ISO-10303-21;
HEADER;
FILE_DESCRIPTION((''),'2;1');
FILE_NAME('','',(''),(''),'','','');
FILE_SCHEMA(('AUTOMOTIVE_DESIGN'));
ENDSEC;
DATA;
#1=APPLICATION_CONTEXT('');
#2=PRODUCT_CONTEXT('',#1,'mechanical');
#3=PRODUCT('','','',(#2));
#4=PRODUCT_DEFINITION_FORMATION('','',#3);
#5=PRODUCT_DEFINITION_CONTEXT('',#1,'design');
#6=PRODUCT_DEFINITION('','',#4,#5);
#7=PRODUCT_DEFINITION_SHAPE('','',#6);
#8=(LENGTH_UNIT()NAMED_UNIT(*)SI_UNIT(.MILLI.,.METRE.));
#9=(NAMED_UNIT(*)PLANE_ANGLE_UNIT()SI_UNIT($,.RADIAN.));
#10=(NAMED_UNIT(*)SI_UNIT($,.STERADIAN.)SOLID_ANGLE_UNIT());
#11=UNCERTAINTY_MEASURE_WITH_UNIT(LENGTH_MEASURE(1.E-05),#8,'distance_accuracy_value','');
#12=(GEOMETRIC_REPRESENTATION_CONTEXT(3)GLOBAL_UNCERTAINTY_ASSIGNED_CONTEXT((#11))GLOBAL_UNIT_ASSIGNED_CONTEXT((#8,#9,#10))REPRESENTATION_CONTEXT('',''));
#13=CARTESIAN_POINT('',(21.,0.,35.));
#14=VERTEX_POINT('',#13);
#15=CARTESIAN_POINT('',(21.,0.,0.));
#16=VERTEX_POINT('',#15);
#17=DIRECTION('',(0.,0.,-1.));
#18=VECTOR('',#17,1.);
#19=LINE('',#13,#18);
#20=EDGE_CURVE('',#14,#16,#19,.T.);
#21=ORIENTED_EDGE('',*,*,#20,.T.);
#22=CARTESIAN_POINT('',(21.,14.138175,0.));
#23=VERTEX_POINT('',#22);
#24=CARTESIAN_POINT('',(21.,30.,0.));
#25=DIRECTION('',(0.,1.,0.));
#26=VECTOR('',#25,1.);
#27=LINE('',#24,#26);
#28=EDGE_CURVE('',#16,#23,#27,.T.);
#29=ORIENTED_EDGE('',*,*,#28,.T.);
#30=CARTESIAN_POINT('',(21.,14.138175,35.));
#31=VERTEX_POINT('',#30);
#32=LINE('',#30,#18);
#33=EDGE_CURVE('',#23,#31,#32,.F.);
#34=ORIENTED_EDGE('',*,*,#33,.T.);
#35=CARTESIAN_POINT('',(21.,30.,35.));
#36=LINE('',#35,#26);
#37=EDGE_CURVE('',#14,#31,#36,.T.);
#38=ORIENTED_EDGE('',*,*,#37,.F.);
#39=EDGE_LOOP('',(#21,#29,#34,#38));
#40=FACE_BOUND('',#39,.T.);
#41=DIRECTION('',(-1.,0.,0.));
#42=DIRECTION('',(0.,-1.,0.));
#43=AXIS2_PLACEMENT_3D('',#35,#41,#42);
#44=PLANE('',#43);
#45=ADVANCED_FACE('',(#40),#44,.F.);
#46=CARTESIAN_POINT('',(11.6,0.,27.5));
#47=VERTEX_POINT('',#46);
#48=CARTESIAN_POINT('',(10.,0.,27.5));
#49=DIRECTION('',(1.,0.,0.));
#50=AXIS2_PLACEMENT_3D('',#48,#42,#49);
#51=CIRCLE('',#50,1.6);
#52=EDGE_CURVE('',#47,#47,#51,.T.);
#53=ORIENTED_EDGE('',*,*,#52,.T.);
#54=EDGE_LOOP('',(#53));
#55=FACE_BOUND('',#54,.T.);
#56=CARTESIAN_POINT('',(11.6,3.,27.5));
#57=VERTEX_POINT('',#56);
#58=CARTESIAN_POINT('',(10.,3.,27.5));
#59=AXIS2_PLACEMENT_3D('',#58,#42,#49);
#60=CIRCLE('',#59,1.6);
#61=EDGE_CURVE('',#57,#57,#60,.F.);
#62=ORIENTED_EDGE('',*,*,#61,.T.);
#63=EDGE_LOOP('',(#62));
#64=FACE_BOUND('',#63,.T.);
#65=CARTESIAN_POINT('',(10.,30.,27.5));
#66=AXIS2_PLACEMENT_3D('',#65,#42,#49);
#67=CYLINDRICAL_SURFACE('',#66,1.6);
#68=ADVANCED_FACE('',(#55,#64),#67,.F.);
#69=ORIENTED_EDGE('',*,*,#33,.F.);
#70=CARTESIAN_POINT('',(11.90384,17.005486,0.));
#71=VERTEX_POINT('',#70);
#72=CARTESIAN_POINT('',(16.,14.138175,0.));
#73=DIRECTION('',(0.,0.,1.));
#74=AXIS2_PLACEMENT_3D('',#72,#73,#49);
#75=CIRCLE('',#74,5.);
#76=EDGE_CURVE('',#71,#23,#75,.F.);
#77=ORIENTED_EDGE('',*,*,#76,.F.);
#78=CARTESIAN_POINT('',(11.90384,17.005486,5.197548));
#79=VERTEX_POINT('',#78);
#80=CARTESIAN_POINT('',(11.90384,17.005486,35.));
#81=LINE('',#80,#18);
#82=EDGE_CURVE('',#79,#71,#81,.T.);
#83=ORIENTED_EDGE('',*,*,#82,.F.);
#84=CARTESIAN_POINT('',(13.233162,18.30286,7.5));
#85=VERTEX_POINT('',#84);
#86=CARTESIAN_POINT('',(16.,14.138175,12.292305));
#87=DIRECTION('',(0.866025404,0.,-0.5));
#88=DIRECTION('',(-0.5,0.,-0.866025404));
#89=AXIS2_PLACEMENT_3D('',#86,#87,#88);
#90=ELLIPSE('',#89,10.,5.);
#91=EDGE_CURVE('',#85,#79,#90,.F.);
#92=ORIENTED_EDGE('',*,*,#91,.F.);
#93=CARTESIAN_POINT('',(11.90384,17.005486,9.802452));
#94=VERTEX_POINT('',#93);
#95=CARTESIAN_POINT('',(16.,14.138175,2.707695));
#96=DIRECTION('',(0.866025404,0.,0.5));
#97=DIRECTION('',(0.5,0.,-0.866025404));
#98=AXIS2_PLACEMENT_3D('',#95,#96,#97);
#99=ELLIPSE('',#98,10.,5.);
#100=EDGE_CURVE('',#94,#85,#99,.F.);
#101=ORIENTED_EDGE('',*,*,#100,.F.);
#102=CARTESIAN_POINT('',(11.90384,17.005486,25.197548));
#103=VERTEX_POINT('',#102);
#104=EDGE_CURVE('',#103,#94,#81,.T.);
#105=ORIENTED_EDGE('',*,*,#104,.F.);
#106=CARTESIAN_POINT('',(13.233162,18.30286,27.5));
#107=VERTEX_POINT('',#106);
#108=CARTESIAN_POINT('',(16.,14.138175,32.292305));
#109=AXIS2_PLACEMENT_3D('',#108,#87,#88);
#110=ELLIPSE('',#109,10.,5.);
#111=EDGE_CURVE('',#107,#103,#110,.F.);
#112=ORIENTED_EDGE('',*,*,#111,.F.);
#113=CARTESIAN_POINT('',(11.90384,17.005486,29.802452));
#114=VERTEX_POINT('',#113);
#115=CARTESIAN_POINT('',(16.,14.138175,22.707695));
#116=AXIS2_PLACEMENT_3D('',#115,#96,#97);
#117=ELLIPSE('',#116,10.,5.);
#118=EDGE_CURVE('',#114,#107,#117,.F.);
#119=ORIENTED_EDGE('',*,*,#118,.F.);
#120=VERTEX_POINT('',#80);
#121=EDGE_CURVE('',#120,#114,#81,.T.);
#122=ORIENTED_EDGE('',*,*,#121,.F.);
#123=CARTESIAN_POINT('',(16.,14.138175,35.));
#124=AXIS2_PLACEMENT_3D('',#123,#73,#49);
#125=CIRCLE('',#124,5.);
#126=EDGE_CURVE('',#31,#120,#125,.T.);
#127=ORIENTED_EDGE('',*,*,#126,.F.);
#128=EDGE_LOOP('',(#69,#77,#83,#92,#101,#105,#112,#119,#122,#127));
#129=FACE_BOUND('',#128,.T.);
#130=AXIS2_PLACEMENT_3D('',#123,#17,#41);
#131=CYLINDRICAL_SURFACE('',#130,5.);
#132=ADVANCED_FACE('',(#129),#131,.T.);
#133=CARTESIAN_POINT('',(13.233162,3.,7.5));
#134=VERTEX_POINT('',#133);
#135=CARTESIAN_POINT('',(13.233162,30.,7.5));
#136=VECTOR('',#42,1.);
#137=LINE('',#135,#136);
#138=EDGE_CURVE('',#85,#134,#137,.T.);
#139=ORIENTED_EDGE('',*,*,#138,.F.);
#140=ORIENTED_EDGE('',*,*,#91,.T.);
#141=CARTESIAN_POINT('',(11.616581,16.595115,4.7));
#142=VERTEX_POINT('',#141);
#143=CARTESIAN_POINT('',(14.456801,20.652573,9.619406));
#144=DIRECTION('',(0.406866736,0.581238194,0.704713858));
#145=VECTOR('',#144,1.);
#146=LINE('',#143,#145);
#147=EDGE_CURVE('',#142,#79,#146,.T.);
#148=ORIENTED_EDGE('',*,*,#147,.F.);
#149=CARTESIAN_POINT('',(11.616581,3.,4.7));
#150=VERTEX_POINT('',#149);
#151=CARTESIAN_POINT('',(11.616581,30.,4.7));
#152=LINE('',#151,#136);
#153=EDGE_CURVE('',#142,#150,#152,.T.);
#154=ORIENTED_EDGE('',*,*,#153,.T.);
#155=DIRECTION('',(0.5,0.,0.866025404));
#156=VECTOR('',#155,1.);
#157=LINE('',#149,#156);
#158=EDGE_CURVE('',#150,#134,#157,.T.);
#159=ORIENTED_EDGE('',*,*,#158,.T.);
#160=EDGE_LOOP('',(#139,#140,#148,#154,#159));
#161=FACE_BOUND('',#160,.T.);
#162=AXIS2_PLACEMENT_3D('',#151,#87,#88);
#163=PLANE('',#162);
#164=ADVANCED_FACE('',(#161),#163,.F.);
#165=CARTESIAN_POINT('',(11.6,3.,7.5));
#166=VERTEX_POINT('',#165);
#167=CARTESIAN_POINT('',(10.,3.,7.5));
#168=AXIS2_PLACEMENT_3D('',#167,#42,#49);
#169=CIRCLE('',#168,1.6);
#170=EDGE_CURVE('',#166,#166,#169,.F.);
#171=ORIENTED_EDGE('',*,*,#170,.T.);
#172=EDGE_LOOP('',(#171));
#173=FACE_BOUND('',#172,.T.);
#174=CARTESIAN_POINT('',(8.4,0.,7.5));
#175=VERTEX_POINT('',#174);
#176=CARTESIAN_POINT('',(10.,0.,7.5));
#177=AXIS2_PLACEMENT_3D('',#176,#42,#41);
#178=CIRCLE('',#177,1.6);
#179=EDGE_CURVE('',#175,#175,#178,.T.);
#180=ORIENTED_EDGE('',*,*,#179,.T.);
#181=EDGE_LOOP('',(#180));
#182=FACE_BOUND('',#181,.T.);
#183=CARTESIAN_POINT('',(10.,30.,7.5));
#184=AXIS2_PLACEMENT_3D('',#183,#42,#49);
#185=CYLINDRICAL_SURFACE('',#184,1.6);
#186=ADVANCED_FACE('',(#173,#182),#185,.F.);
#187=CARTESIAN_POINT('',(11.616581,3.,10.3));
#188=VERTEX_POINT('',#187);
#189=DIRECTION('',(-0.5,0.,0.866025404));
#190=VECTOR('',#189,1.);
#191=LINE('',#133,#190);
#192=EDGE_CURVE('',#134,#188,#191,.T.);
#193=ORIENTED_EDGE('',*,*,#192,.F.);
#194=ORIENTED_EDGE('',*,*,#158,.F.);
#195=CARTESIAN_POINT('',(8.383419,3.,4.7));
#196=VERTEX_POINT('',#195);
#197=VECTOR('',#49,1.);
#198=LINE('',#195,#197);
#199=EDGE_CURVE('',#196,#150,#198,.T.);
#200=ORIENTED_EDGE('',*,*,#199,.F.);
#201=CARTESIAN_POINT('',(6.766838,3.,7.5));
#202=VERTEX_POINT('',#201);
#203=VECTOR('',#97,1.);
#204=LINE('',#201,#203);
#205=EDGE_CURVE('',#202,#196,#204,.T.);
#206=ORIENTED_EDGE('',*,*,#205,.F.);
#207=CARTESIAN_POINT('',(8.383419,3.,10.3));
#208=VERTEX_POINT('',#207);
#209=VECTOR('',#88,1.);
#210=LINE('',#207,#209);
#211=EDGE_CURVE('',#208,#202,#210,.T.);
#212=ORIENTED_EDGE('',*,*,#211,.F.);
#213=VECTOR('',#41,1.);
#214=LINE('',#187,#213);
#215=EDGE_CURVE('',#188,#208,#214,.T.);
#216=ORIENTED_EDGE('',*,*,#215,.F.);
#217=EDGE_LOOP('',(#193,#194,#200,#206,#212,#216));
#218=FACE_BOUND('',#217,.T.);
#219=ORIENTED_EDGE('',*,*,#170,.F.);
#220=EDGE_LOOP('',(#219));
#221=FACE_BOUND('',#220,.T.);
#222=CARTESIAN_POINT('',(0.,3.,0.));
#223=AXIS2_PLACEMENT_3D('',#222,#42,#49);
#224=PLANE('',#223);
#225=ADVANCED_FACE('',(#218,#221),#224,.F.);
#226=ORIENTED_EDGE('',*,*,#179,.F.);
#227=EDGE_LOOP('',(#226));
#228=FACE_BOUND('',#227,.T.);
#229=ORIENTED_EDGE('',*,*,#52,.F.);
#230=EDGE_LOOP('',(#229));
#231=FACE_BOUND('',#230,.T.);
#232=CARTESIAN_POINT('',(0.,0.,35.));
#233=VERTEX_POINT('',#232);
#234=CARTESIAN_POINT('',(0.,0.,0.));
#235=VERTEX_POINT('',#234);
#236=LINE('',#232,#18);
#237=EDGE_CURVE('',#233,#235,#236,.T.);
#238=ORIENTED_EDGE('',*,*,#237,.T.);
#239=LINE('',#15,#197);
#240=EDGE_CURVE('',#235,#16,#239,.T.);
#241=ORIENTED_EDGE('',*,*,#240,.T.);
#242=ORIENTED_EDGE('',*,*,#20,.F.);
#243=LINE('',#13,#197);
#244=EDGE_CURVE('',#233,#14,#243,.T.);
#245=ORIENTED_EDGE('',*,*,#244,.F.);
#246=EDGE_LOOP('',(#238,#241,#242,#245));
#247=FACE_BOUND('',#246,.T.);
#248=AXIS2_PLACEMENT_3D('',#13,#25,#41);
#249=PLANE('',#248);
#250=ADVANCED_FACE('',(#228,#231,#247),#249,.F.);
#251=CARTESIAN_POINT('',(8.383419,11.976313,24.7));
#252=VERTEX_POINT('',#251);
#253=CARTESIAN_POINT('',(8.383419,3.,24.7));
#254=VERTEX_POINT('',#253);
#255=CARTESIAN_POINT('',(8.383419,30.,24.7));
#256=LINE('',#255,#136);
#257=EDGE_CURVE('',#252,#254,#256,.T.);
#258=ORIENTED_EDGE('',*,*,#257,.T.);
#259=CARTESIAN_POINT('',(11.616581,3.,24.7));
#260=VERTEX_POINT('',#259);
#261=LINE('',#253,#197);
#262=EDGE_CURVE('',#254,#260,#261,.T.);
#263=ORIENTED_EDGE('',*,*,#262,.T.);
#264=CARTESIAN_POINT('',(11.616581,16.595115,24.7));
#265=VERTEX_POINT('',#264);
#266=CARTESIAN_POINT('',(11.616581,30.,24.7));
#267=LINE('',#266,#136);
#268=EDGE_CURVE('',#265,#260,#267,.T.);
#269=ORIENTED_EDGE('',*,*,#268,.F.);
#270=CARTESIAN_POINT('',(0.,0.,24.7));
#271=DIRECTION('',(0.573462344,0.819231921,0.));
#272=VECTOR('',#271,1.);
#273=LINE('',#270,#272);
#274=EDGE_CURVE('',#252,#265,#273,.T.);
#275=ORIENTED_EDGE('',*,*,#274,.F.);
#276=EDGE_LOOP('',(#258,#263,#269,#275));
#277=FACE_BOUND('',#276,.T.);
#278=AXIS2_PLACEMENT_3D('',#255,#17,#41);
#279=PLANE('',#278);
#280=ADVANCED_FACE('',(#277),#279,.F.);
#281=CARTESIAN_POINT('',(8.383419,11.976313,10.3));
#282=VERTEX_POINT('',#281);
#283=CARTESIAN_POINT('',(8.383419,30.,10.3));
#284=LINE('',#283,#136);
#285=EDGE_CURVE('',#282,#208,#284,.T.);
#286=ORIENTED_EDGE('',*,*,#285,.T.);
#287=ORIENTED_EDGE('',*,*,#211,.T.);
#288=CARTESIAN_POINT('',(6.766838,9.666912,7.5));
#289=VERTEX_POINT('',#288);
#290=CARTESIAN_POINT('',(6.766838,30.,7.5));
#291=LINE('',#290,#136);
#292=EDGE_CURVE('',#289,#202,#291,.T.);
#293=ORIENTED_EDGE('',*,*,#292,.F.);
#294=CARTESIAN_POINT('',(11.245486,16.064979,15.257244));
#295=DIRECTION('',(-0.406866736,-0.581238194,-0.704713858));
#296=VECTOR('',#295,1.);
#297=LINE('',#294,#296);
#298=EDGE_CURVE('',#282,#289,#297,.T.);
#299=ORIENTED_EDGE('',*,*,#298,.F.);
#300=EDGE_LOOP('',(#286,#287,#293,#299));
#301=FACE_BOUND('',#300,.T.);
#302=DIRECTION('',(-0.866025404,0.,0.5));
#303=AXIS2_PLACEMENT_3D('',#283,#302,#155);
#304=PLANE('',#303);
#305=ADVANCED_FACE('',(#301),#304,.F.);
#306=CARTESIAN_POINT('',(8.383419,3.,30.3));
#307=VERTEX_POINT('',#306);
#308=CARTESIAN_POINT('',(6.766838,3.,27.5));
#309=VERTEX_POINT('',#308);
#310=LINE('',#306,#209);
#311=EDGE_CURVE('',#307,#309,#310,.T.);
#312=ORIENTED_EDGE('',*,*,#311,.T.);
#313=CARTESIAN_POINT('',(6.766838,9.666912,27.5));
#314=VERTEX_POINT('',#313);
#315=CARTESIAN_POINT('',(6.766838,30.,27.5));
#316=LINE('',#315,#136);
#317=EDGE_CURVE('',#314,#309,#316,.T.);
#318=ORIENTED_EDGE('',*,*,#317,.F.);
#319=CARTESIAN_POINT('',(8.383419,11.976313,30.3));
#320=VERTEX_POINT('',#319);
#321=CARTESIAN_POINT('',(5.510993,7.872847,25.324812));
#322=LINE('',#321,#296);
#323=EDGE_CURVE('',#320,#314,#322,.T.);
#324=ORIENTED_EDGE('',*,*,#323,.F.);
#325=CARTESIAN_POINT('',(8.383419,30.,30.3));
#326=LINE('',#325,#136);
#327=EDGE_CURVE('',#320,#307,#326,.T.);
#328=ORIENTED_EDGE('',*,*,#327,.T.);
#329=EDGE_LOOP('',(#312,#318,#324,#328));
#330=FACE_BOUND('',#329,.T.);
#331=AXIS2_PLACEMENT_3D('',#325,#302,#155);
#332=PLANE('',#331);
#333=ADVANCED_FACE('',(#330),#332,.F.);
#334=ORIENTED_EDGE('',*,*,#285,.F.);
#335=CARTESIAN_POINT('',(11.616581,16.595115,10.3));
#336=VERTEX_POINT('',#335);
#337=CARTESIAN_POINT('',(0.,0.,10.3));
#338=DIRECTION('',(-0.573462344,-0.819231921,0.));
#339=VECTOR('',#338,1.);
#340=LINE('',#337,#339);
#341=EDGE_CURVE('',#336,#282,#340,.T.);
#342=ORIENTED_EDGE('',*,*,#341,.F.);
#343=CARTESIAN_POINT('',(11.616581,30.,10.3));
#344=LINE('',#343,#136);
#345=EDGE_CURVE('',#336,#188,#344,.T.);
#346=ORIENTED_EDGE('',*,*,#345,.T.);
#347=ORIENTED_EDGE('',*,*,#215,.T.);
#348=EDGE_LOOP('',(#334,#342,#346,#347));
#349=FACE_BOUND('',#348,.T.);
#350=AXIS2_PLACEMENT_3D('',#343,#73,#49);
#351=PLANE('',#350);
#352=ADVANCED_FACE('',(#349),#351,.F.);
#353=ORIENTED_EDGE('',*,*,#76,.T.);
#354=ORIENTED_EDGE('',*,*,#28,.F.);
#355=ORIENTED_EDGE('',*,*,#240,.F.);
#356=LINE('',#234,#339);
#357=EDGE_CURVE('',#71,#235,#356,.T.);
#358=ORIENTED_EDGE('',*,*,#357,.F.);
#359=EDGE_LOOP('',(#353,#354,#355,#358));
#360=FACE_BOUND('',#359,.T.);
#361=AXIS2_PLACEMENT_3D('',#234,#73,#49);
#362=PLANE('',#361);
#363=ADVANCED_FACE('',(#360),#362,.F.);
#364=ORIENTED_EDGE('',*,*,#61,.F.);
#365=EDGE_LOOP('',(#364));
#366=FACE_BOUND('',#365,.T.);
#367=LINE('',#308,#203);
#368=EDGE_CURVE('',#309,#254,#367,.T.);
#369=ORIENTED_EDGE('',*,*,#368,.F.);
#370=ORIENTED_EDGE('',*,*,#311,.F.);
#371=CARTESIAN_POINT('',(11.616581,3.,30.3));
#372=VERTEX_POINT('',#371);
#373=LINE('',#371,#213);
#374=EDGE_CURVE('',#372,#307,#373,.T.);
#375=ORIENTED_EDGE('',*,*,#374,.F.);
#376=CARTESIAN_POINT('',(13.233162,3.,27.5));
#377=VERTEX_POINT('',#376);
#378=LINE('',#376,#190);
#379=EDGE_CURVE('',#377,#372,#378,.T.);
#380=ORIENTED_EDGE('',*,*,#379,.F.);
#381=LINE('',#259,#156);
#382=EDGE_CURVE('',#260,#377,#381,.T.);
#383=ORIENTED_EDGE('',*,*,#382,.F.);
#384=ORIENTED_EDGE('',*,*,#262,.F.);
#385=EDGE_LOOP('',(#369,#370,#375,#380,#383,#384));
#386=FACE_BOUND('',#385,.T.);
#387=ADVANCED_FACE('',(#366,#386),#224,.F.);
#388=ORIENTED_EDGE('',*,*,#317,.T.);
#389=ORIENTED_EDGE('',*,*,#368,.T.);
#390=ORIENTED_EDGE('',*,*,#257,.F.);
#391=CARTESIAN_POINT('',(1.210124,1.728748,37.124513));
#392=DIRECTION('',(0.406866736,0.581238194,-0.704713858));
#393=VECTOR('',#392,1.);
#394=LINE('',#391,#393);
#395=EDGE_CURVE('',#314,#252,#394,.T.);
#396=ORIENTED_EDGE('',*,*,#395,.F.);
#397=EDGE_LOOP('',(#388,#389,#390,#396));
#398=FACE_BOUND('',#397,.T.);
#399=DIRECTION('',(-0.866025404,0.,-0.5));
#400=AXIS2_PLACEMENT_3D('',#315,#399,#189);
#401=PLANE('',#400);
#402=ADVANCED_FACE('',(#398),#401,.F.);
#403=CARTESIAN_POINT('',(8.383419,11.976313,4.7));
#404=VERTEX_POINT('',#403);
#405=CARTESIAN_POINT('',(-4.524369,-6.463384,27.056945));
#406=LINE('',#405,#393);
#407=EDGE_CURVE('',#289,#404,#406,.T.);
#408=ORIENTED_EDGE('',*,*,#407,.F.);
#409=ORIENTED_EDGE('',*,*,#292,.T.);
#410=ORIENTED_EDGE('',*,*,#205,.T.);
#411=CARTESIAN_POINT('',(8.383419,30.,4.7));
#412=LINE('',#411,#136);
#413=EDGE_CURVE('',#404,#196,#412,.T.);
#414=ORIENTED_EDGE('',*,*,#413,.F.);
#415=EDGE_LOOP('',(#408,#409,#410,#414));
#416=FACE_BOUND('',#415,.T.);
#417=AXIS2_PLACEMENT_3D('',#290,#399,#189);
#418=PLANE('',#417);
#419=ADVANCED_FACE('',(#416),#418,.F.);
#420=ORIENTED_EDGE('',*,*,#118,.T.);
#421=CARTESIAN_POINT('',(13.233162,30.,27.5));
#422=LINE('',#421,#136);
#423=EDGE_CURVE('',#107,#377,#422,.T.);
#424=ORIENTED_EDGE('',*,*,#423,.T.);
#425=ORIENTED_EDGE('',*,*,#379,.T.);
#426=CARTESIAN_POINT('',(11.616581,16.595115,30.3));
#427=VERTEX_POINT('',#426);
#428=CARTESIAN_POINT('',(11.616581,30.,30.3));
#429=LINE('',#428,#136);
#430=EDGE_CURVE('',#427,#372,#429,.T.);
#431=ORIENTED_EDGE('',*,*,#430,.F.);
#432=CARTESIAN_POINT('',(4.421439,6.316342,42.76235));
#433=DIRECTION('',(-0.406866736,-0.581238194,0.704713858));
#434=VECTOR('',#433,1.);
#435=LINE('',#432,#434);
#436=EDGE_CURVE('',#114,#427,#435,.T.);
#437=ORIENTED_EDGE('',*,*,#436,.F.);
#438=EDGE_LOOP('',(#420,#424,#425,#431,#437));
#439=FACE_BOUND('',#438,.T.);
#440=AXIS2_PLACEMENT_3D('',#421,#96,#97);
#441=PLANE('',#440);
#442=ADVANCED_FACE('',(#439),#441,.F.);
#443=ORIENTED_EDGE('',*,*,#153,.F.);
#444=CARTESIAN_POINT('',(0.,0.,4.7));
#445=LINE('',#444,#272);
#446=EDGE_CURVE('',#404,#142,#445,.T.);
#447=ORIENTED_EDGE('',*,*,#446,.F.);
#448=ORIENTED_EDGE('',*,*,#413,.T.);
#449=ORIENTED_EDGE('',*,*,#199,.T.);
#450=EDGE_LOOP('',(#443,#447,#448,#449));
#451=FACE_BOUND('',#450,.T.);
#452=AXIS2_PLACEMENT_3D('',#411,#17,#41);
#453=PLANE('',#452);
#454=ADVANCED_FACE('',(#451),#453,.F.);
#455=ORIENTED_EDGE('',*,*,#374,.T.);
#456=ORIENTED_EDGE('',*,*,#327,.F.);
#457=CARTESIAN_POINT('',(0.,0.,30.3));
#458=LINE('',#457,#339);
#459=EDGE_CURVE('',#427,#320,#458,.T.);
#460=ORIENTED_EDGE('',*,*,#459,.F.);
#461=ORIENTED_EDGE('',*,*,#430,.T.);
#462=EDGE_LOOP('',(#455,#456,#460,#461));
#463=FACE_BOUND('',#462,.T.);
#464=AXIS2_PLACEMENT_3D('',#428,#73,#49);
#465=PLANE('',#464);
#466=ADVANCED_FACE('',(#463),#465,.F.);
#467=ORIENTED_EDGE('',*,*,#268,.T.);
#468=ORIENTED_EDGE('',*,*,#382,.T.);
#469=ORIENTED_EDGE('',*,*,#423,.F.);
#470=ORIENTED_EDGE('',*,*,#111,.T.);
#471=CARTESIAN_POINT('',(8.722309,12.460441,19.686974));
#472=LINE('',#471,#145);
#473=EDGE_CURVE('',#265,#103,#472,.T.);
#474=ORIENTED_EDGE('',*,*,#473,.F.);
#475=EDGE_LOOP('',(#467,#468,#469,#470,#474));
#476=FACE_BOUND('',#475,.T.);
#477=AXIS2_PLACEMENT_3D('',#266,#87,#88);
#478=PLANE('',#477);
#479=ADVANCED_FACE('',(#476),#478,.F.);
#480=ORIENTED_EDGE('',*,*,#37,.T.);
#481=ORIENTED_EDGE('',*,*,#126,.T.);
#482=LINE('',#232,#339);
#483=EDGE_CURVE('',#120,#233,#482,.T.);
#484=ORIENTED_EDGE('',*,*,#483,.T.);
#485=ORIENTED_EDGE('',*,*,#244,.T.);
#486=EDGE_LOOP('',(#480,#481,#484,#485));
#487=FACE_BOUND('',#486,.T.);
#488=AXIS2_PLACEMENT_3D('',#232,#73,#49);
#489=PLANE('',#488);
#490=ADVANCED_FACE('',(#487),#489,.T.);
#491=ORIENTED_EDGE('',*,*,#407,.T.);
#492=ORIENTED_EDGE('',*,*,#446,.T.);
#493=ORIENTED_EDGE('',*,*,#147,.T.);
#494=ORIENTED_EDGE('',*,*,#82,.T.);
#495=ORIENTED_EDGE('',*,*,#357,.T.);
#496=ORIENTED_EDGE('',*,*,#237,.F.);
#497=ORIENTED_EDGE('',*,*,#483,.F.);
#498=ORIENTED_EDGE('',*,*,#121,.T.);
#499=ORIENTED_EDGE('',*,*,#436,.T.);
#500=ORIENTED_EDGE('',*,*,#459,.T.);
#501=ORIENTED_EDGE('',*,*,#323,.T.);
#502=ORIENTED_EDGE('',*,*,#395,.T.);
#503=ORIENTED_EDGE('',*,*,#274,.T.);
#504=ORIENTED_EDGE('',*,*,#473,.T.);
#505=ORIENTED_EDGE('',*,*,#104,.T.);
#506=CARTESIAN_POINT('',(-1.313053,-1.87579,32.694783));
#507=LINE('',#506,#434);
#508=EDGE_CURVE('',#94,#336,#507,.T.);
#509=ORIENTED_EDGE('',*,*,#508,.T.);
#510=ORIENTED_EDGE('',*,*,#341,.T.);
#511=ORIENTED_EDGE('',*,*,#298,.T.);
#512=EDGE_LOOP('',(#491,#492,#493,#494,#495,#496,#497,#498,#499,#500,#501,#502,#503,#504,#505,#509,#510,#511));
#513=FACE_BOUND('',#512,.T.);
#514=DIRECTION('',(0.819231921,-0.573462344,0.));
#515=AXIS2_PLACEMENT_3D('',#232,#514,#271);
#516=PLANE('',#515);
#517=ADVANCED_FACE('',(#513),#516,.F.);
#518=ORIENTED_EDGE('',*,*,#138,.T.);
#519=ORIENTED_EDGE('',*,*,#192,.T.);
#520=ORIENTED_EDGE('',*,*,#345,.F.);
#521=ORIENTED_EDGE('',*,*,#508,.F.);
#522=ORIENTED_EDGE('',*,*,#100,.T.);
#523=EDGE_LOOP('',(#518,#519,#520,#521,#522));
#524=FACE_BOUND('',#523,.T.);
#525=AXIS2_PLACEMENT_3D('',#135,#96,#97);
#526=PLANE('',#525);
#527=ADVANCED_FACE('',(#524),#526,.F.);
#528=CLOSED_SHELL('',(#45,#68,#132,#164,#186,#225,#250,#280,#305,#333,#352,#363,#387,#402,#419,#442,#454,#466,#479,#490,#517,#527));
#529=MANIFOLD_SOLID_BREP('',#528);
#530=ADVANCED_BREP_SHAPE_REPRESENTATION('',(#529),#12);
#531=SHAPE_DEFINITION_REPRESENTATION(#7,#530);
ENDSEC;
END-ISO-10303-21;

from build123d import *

# Parameters (mm, degrees)
BOSS_EXTRUDE1_DEPTH = 35
SKETCH2_R           = 1.6
CUT_EXTRUDE1_DEPTH  = 51.655700568
CUT_EXTRUDE2_START  = -3
CUT_EXTRUDE2_DEPTH  = 48.655700568
FILLET1_R           = 5


with BuildPart() as part:
    # Sketch1 → Boss-Extrude1 (new body)
    with BuildSketch(Plane.XY):
        Polygon((0, 0), (21, 30), (21, 0), align=None)
    extrude(amount=BOSS_EXTRUDE1_DEPTH)

    # Sketch2 → Cut-Extrude1 (cut, through all)
    with BuildSketch(Plane.XZ):
        with Locations((10, 27.5)):
            Circle(SKETCH2_R)
        with Locations(Location((10, 7.5, 0), (0, 0, 180))):
            Circle(SKETCH2_R)
    extrude(amount=-CUT_EXTRUDE1_DEPTH, mode=Mode.SUBTRACT)

    # Sketch3 → Cut-Extrude2 (cut, through all)
    with BuildSketch(Plane.XZ.offset(CUT_EXTRUDE2_START)):
        Polygon((13.233161507, 27.5), (11.616580754, 30.3), (8.383419246, 30.3), (6.766838493, 27.5), (8.383419246, 24.7), (11.616580754, 24.7), align=None)
        Polygon((13.233161507, 7.5), (11.616580754, 10.3), (8.383419246, 10.3), (6.766838493, 7.5), (8.383419246, 4.7), (11.616580754, 4.7), align=None)
    extrude(amount=-CUT_EXTRUDE2_DEPTH, mode=Mode.SUBTRACT)

    # Fillet1
    # the kernel refuses this fillet: 5 mm, written as the material it takes off along each edge
    with BuildSketch(Plane(origin=(21, 30, -39.6545636), x_dir=(-0.5734623443633282, -0.8192319205190405, 0), z_dir=(0, 0, 1))) as fillet1_piece_1:
        with BuildLine():
            CenterArc((FILLET1_R * 3.17236508796, FILLET1_R), FILLET1_R, 124.992020199, 145.007979801)
            Line((FILLET1_R * 2.5989027436, FILLET1_R * 1.81923192052), (0, 0))
            Line((0, 0), (FILLET1_R * 3.17236508796, 0))
        make_face()
    extrude(amount=114.309127199, mode=Mode.SUBTRACT)


solid = part.part
